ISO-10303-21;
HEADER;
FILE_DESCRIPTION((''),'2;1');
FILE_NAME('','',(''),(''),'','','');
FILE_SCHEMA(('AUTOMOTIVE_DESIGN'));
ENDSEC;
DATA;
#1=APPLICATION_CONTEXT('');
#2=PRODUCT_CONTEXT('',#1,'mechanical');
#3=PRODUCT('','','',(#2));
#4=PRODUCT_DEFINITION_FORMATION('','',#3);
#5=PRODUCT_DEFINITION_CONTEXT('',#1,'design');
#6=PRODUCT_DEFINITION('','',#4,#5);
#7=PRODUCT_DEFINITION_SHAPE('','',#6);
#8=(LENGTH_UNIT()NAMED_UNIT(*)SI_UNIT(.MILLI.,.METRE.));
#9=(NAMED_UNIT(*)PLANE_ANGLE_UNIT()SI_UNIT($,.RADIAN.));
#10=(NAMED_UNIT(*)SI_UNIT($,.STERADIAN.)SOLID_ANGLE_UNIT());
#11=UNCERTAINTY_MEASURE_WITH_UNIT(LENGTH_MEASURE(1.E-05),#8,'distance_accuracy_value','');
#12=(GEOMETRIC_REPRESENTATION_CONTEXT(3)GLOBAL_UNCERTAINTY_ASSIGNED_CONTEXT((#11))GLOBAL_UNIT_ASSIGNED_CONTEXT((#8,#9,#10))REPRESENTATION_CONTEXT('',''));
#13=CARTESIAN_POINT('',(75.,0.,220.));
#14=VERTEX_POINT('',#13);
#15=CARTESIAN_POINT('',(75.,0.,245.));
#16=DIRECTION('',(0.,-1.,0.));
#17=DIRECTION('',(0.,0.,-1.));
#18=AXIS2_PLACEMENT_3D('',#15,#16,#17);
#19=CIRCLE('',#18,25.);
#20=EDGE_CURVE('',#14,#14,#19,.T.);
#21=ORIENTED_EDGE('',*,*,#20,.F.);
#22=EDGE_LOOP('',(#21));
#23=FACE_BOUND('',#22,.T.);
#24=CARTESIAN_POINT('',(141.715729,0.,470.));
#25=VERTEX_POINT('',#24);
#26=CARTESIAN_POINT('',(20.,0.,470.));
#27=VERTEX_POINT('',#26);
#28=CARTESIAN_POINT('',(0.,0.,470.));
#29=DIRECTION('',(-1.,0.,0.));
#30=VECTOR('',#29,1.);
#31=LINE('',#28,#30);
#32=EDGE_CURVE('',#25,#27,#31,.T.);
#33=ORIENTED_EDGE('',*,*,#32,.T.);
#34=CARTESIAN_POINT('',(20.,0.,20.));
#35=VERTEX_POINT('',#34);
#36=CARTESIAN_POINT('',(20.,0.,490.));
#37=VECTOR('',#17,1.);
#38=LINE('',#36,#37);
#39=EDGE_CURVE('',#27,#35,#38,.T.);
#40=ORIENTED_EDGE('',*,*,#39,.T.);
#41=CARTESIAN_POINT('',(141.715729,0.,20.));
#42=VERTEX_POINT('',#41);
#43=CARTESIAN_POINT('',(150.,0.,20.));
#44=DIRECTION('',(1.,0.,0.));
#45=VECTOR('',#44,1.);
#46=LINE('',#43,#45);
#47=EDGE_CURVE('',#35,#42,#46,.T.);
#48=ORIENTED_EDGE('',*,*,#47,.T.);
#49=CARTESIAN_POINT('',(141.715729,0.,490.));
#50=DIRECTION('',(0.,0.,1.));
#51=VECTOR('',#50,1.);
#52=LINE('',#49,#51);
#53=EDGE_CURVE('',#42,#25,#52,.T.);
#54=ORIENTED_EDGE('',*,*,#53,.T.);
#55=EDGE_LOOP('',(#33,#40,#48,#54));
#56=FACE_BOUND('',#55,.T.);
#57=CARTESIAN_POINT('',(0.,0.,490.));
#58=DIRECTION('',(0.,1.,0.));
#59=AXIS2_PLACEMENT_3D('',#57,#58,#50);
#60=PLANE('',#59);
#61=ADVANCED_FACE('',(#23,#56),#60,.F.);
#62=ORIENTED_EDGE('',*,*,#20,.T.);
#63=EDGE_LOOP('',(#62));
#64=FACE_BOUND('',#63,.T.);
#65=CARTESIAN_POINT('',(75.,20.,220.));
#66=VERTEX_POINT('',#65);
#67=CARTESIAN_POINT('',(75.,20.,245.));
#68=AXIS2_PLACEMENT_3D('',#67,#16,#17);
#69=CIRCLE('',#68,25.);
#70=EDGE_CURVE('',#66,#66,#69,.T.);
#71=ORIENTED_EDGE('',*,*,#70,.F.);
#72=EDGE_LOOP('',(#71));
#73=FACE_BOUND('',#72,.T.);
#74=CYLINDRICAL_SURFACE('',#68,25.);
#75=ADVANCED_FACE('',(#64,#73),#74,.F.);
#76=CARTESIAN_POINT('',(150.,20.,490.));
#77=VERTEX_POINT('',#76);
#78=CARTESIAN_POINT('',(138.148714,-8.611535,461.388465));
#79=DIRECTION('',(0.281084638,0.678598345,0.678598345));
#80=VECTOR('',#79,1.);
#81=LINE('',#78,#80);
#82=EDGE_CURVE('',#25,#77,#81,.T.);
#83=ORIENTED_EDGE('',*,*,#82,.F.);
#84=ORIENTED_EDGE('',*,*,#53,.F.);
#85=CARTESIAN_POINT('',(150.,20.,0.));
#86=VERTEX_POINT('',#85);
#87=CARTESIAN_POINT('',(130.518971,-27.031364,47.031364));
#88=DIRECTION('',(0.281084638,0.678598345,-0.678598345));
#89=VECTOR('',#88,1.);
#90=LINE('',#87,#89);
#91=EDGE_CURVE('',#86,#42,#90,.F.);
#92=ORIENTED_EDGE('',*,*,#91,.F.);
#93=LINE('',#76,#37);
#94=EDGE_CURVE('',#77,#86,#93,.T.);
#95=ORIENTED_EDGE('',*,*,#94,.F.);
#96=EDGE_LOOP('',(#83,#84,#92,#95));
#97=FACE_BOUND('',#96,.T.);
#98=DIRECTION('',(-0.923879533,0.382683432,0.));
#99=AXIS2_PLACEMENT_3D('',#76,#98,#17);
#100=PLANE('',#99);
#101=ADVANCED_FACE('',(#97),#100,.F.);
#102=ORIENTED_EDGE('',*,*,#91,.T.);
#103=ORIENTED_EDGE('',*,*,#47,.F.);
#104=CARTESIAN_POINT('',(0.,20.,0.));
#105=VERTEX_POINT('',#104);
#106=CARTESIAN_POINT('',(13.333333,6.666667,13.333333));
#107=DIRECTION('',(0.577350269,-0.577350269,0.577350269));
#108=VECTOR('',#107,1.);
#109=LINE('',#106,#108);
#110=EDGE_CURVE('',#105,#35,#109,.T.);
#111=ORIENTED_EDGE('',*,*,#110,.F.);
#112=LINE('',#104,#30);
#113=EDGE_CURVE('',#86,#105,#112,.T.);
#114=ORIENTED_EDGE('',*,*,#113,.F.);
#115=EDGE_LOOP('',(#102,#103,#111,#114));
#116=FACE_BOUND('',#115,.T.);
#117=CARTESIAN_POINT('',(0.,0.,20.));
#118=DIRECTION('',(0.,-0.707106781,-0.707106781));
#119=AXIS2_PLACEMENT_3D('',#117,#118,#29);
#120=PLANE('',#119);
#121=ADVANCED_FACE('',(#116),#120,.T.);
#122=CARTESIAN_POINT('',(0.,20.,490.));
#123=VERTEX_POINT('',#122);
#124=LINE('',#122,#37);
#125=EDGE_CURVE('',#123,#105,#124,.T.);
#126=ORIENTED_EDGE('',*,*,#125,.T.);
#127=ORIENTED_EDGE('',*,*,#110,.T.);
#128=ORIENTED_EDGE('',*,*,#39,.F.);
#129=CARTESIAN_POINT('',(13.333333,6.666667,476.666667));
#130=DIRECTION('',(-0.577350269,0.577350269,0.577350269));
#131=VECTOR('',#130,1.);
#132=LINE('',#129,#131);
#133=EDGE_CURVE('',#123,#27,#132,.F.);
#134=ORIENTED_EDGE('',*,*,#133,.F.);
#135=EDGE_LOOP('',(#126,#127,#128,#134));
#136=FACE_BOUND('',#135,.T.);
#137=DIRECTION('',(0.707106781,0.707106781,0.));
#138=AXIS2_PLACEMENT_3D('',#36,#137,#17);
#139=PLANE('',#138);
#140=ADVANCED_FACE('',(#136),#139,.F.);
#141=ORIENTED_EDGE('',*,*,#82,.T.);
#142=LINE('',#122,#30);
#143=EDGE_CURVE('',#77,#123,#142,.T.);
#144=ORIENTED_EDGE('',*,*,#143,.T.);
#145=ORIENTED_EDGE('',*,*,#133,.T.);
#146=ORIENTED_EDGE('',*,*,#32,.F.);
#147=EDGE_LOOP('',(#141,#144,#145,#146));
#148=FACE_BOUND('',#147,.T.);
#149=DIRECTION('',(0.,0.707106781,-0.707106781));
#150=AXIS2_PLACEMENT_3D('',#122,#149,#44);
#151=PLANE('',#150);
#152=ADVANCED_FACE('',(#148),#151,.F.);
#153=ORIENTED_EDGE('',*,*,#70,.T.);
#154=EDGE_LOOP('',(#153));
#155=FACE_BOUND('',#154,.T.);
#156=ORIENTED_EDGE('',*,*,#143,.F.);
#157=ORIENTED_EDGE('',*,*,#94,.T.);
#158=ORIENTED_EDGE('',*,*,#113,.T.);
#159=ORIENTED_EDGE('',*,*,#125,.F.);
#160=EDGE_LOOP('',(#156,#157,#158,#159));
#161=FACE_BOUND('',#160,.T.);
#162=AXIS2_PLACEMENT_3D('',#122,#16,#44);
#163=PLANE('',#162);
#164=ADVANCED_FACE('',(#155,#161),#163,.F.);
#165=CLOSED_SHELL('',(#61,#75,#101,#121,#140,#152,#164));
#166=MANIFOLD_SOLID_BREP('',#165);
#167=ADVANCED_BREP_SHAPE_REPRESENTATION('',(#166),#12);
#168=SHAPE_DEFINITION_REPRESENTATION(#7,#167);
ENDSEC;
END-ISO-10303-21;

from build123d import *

# Parameters (mm, degrees)
ESBO_O1_W                = 150
ESBO_O1_H                = 20
RESSALTO_EXTRUS_O1_DEPTH = 490
CHANFRO1_SIZE            = 20
ESBO_O2_R                = 25
CORTE_EXTRUS_O1_DEPTH    = 513.835256198
CHANFRO2_SIZE2           = 20
CHANFRO2_SIZE            = 8.284271247


# Some blends are built 0.0001 mm under size
with BuildPart() as part:
    # Esboço1 → Ressalto-extrusão1 (new body)
    with BuildSketch(Plane.XY):
        with Locations((75, 10)):
            Rectangle(ESBO_O1_W, ESBO_O1_H)
    extrude(amount=RESSALTO_EXTRUS_O1_DEPTH)

    # Chanfro1
    # the kernel refuses this chamfer: 20 mm, written as the material it takes off along each edge
    with BuildSketch(Plane(origin=(-51.433659759, 0, 490), x_dir=(0, -0.027495876610586334, -0.9996219169112968), z_dir=(1, 0, 0))) as chanfro1_piece_1:
        Polygon((CHANFRO1_SIZE * 0.999621916911, CHANFRO1_SIZE * 0.0274958766106), (-CHANFRO1_SIZE * 0.0274958766106, CHANFRO1_SIZE * 0.999621916911), (0, 0), align=None)
    extrude(amount=252.867319519, mode=Mode.SUBTRACT)
    with BuildSketch(Plane(origin=(0, 0, -51.433659759), x_dir=(0.9996219169112968, -0.027495876610586372, 0), z_dir=(0, 0, 1))) as chanfro1_piece_2:
        Polygon((CHANFRO1_SIZE * 0.999621916911, CHANFRO1_SIZE * 0.0274958766106), (-CHANFRO1_SIZE * 0.0274958766106, CHANFRO1_SIZE * 0.999621916911), (0, 0), align=None)
    extrude(amount=592.867319519, mode=Mode.SUBTRACT)
    with BuildSketch(Plane(origin=(-51.433659759, 0, 0), x_dir=(0, -0.027495876610586372, 0.9996219169112968), z_dir=(1, 0, 0))) as chanfro1_piece_3:
        Polygon((CHANFRO1_SIZE * 0.999621916911, -CHANFRO1_SIZE * 0.0274958766106), (-CHANFRO1_SIZE * 0.0274958766106, -CHANFRO1_SIZE * 0.999621916911), (0, 0), align=None)
    extrude(amount=252.867319519, mode=Mode.SUBTRACT)

    # Esboço2 → Corte-extrusão1 (cut, through all)
    with BuildSketch(Plane(origin=(0, 0, 0), x_dir=(-1, 0, 0), z_dir=(0, -1, 0))):
        with Locations(Location((-75, -245, 0), (0, 0, 90))):
            Circle(ESBO_O2_R)
    extrude(amount=-CORTE_EXTRUS_O1_DEPTH, mode=Mode.SUBTRACT)

    # Chanfro2
    chanfro2_edges = [part.edges().sort_by_distance(p)[0] for p in [
        (150, 0, 245),
    ]]
    chanfro2_side = [part.faces().sort_by_distance(p)[0] for p in [
        (149.834314575, 0, 245),
    ]]
    chamfer(chanfro2_edges, length=CHANFRO2_SIZE - 0.0001, length2=CHANFRO2_SIZE2 - 0.0001, reference=chanfro2_side[0])  # a hair under: the kernel refuses the full size


solid = part.part
